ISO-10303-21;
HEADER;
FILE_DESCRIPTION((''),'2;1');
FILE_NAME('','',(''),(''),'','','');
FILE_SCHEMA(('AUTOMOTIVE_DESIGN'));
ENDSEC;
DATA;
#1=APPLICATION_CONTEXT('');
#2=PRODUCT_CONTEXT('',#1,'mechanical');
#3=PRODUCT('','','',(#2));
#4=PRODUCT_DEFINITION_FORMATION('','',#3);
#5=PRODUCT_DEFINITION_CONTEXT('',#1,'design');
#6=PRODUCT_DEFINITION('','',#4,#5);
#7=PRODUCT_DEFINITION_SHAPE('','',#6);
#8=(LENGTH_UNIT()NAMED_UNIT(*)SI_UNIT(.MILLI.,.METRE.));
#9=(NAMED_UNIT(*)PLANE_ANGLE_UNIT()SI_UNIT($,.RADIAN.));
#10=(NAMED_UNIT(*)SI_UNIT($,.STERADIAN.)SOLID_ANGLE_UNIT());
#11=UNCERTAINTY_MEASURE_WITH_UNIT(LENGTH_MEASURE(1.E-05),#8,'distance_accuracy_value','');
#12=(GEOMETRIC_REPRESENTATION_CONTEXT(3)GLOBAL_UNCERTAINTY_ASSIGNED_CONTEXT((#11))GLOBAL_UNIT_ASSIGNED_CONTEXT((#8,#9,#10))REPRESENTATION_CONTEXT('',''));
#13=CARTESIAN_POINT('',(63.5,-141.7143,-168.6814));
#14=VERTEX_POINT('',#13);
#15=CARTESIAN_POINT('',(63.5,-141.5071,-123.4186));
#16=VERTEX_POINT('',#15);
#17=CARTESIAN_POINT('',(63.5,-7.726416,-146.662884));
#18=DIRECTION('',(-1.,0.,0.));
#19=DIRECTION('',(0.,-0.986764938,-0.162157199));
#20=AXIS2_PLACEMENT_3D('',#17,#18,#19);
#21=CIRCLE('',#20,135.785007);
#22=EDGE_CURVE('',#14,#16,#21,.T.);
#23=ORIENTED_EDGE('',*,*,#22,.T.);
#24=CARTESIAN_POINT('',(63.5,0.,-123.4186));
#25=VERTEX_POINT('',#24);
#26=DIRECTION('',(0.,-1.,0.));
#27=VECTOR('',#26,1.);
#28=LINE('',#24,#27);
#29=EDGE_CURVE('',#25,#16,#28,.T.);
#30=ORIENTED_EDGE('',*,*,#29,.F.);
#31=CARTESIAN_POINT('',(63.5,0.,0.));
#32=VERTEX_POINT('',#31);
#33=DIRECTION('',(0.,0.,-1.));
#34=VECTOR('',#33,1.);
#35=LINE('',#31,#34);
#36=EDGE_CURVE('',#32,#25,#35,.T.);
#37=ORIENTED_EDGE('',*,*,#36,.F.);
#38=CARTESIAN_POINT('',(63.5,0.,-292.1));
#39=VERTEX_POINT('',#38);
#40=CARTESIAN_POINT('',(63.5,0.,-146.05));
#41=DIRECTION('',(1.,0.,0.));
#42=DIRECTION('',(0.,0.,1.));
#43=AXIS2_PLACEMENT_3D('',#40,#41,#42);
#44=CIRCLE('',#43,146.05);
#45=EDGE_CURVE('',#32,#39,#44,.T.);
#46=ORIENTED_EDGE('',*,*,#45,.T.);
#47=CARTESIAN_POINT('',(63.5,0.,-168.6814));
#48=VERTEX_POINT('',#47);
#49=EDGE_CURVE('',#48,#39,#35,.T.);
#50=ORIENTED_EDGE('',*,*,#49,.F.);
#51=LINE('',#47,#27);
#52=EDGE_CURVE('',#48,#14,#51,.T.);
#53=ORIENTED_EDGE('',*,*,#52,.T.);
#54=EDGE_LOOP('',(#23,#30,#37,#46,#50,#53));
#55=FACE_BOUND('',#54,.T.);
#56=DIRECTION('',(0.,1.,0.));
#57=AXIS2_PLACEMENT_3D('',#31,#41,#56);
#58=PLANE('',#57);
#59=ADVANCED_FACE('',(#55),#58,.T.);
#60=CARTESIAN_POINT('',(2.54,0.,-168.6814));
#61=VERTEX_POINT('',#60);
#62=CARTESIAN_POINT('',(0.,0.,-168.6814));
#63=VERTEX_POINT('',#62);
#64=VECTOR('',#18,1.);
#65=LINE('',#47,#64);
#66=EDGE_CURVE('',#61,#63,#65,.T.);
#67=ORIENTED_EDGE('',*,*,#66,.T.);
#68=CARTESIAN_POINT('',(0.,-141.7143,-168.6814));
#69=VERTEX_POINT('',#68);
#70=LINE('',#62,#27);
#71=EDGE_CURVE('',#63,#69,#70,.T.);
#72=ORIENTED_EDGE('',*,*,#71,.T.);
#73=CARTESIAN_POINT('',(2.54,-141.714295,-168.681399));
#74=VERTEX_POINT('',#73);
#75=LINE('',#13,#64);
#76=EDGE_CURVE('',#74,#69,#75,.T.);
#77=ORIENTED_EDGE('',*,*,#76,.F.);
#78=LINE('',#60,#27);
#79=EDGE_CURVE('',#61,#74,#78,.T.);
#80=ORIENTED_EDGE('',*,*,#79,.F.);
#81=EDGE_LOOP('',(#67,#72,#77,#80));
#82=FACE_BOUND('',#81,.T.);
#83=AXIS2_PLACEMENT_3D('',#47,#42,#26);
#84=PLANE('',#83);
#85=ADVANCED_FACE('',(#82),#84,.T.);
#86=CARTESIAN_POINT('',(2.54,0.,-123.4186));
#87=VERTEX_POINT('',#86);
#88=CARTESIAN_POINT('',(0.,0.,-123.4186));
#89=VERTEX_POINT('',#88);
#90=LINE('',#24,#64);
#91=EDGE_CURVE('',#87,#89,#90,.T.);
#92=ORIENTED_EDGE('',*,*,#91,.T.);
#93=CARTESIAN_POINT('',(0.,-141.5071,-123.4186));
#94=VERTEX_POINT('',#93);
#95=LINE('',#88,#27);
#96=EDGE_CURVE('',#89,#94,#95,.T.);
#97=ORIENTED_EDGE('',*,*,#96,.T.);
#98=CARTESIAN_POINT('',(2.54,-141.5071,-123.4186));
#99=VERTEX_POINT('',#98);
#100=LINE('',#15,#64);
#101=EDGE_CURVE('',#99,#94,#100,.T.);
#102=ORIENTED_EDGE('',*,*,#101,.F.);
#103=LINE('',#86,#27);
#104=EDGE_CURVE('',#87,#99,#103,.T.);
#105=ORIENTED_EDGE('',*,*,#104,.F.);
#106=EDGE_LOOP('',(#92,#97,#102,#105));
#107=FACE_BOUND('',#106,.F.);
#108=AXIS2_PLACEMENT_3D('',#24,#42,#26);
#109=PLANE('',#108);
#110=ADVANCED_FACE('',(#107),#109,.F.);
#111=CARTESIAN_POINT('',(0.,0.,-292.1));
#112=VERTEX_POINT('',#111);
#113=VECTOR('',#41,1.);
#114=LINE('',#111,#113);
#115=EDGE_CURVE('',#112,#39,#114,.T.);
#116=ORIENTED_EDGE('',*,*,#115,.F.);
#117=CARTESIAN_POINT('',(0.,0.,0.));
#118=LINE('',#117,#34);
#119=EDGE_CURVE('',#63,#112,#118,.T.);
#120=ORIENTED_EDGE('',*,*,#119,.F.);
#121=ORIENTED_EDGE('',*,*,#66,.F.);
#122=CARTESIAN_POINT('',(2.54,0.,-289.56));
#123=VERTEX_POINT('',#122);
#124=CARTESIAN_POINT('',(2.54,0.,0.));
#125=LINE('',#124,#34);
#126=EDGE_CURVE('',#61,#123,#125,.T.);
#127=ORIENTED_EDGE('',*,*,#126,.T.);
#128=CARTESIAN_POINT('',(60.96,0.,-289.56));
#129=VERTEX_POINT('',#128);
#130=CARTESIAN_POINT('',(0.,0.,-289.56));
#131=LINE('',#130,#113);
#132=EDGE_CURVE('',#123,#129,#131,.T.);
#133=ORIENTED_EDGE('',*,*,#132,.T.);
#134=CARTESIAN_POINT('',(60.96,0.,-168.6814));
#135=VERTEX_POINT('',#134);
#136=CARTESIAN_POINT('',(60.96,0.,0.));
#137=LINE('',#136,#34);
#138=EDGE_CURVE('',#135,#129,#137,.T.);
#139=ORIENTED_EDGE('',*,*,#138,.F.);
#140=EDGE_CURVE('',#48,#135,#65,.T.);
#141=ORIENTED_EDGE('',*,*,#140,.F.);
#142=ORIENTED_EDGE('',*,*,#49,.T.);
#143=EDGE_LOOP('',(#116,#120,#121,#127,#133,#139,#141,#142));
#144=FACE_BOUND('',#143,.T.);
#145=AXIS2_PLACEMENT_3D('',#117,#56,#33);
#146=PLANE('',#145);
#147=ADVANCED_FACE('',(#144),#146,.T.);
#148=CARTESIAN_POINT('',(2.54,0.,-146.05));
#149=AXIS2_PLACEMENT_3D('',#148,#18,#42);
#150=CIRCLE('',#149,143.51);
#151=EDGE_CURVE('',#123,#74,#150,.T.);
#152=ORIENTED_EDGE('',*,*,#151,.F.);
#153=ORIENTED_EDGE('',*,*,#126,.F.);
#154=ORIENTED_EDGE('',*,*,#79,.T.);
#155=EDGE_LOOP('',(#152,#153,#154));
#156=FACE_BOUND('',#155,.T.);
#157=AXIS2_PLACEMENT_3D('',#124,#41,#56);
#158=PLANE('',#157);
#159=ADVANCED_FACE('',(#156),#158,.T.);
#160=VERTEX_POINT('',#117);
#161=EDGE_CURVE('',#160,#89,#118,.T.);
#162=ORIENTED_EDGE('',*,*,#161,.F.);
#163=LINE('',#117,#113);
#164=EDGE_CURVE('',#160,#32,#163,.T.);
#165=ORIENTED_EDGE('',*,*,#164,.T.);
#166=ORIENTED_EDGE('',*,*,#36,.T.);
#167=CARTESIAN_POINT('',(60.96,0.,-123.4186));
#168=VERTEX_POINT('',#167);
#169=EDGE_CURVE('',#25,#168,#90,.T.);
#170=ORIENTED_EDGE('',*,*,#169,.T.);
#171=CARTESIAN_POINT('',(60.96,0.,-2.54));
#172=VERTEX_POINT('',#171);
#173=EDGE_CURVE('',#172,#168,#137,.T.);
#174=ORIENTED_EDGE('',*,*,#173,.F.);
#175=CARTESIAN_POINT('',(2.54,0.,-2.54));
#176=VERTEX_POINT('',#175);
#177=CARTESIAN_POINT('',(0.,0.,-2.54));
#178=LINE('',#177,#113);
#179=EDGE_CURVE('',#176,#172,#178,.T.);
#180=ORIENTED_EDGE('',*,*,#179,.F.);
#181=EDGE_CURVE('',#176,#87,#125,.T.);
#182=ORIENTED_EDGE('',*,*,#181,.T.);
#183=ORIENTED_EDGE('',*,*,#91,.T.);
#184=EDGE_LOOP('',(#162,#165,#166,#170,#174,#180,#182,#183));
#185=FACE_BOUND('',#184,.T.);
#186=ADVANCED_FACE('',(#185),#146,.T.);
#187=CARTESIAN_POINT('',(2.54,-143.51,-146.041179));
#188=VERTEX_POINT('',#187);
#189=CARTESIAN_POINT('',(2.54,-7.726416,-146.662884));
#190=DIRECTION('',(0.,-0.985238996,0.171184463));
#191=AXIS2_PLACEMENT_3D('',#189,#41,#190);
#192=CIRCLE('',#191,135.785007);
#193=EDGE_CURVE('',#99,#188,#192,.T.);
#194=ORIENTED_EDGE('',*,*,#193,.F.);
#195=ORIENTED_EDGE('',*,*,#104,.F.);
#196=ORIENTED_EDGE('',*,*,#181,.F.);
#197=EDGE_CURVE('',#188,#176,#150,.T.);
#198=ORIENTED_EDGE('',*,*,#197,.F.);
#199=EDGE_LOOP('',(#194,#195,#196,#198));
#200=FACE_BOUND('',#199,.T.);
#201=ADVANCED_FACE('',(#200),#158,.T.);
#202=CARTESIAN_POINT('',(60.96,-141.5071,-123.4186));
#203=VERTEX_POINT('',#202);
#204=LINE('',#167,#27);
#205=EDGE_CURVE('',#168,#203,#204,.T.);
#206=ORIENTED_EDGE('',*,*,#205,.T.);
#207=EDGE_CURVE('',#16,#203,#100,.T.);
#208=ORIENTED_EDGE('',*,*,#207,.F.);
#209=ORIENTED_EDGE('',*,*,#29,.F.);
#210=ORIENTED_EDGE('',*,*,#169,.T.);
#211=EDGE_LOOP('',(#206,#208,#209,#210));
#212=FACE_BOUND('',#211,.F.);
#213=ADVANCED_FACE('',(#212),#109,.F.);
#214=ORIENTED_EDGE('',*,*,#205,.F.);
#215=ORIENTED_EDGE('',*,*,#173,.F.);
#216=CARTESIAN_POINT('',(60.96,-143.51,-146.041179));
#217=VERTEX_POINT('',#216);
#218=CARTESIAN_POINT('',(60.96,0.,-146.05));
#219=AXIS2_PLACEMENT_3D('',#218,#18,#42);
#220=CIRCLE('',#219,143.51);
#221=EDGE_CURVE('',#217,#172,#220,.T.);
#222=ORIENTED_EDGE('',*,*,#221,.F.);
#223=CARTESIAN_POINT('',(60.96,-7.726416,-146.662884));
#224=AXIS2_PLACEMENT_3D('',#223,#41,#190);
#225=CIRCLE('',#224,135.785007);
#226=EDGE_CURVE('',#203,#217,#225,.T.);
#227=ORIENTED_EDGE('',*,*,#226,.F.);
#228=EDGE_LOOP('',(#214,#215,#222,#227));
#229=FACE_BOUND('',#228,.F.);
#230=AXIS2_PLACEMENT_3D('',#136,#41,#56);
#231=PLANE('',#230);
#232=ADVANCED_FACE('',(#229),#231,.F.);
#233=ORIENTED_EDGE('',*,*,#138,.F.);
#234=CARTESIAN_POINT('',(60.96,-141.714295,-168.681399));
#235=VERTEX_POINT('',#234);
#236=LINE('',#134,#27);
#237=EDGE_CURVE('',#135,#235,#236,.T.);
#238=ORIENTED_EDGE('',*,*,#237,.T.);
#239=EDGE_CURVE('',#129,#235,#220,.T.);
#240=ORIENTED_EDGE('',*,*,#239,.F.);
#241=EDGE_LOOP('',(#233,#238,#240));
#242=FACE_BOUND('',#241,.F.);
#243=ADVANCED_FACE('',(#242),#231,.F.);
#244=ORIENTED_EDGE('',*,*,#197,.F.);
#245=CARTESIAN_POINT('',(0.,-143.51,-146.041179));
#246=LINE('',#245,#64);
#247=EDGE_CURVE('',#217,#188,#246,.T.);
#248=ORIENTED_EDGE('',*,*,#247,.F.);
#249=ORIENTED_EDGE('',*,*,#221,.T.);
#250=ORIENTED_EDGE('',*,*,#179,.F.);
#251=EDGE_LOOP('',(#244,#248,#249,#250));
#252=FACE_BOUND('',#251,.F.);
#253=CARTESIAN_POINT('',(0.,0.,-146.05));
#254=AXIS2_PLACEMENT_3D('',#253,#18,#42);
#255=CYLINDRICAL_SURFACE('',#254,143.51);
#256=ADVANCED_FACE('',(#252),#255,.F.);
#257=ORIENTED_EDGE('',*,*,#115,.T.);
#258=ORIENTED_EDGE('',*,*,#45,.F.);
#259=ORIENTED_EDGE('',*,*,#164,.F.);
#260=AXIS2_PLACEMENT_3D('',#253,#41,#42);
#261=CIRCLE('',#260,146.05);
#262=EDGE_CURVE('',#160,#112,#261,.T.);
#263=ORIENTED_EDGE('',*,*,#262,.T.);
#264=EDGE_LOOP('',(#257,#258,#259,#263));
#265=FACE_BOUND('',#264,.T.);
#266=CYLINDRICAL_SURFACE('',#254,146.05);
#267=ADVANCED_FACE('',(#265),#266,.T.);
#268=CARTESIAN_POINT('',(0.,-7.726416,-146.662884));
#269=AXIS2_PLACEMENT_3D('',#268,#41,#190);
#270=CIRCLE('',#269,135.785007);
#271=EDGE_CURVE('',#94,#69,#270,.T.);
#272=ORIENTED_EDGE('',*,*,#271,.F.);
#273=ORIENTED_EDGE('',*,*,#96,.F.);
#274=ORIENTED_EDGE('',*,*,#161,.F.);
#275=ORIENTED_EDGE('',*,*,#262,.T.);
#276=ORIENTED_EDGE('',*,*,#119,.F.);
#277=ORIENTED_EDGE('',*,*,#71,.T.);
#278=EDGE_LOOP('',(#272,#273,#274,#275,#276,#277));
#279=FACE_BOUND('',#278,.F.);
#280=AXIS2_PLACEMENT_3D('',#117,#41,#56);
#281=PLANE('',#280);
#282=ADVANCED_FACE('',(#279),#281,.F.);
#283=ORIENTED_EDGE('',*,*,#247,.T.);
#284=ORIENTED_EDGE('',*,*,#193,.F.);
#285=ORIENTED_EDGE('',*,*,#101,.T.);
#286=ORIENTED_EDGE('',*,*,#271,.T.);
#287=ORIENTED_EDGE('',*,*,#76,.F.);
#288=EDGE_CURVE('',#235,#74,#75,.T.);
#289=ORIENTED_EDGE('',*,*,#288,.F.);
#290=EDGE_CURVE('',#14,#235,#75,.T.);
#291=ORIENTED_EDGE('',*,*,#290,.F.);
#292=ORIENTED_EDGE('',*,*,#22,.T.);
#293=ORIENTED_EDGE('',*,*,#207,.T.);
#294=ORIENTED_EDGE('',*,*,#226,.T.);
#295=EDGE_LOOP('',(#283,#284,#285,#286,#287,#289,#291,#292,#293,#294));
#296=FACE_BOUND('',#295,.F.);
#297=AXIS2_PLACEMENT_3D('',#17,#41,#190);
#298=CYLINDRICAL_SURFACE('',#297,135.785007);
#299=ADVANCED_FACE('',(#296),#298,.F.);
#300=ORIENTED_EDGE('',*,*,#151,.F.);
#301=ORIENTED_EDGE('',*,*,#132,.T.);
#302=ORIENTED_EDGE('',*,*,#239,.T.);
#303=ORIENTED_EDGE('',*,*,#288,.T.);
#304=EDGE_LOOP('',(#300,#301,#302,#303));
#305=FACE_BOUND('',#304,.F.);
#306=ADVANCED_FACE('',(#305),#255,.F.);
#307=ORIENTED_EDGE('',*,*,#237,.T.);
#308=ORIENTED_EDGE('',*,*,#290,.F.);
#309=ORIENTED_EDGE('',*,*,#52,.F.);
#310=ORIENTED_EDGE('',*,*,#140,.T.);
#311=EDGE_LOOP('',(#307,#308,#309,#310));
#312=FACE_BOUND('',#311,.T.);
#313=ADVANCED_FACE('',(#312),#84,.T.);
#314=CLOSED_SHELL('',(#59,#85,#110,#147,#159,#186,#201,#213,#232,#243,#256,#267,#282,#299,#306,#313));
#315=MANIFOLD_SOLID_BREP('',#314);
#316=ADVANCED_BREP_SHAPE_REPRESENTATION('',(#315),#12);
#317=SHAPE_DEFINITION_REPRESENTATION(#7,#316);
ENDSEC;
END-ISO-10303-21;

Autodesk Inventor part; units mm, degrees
ref_plane "YZ Plane" through (0, 0, 0) normal (1, 0, 0) x (0, 1, 0)
ref_plane "XZ Plane" through (0, 0, 0) normal (0, 1, 0) x (-1, 0, 0)
ref_plane "XY Plane" through (0, 0, 0) normal (0, 0, 1) x (1, 0, 0)
sketch "Sketch1" plane through (0, 0, 0) normal (1, 0, 0) x (0, 1, 0)
  line L0 (0, 0) -> (0, -292.1)
  arc A0 (0, 0) -> (0, -292.1) centre (0, -146.05) ccw
  dimension "d0" = 292.1
  dimension "d1" = 146.05
extrude "Extrusion1" add sketch "Sketch1" along normal blind 63.5
shell "Shell1" thickness 2.54 removed faces 1 at (42.3333, 0, -97.3667)
sketch "Sketch3" plane through (63.5, 0, 0) normal (1, 0, 0) x (0, 0, -1)
  line L0 (292.1, 0) -> (0, 0) projected
  line L1 (123.4186, 0) -> (168.6814, 0)
  line L2 (123.4186, 0) -> (123.4186, -144.4974)
  line L3 (168.6814, 0) -> (168.6814, -144.4974)
  arc A0 (2.54, 0) -> (289.56, 0) centre (146.05, 0) ccw projected
  arc A1 (123.4186, -141.5071) -> (168.6814, -141.7143) centre (146.663, -7.7251) ccw
  dimension "d9" = 45.2628
  dimension "d10" = 123.4186
extrude "Extrusion4" cut sketch "Sketch3" against normal blind 3810000 contours L3 A0 A1 L2 L0 | A1 A0
properties part number "GearHolster"
